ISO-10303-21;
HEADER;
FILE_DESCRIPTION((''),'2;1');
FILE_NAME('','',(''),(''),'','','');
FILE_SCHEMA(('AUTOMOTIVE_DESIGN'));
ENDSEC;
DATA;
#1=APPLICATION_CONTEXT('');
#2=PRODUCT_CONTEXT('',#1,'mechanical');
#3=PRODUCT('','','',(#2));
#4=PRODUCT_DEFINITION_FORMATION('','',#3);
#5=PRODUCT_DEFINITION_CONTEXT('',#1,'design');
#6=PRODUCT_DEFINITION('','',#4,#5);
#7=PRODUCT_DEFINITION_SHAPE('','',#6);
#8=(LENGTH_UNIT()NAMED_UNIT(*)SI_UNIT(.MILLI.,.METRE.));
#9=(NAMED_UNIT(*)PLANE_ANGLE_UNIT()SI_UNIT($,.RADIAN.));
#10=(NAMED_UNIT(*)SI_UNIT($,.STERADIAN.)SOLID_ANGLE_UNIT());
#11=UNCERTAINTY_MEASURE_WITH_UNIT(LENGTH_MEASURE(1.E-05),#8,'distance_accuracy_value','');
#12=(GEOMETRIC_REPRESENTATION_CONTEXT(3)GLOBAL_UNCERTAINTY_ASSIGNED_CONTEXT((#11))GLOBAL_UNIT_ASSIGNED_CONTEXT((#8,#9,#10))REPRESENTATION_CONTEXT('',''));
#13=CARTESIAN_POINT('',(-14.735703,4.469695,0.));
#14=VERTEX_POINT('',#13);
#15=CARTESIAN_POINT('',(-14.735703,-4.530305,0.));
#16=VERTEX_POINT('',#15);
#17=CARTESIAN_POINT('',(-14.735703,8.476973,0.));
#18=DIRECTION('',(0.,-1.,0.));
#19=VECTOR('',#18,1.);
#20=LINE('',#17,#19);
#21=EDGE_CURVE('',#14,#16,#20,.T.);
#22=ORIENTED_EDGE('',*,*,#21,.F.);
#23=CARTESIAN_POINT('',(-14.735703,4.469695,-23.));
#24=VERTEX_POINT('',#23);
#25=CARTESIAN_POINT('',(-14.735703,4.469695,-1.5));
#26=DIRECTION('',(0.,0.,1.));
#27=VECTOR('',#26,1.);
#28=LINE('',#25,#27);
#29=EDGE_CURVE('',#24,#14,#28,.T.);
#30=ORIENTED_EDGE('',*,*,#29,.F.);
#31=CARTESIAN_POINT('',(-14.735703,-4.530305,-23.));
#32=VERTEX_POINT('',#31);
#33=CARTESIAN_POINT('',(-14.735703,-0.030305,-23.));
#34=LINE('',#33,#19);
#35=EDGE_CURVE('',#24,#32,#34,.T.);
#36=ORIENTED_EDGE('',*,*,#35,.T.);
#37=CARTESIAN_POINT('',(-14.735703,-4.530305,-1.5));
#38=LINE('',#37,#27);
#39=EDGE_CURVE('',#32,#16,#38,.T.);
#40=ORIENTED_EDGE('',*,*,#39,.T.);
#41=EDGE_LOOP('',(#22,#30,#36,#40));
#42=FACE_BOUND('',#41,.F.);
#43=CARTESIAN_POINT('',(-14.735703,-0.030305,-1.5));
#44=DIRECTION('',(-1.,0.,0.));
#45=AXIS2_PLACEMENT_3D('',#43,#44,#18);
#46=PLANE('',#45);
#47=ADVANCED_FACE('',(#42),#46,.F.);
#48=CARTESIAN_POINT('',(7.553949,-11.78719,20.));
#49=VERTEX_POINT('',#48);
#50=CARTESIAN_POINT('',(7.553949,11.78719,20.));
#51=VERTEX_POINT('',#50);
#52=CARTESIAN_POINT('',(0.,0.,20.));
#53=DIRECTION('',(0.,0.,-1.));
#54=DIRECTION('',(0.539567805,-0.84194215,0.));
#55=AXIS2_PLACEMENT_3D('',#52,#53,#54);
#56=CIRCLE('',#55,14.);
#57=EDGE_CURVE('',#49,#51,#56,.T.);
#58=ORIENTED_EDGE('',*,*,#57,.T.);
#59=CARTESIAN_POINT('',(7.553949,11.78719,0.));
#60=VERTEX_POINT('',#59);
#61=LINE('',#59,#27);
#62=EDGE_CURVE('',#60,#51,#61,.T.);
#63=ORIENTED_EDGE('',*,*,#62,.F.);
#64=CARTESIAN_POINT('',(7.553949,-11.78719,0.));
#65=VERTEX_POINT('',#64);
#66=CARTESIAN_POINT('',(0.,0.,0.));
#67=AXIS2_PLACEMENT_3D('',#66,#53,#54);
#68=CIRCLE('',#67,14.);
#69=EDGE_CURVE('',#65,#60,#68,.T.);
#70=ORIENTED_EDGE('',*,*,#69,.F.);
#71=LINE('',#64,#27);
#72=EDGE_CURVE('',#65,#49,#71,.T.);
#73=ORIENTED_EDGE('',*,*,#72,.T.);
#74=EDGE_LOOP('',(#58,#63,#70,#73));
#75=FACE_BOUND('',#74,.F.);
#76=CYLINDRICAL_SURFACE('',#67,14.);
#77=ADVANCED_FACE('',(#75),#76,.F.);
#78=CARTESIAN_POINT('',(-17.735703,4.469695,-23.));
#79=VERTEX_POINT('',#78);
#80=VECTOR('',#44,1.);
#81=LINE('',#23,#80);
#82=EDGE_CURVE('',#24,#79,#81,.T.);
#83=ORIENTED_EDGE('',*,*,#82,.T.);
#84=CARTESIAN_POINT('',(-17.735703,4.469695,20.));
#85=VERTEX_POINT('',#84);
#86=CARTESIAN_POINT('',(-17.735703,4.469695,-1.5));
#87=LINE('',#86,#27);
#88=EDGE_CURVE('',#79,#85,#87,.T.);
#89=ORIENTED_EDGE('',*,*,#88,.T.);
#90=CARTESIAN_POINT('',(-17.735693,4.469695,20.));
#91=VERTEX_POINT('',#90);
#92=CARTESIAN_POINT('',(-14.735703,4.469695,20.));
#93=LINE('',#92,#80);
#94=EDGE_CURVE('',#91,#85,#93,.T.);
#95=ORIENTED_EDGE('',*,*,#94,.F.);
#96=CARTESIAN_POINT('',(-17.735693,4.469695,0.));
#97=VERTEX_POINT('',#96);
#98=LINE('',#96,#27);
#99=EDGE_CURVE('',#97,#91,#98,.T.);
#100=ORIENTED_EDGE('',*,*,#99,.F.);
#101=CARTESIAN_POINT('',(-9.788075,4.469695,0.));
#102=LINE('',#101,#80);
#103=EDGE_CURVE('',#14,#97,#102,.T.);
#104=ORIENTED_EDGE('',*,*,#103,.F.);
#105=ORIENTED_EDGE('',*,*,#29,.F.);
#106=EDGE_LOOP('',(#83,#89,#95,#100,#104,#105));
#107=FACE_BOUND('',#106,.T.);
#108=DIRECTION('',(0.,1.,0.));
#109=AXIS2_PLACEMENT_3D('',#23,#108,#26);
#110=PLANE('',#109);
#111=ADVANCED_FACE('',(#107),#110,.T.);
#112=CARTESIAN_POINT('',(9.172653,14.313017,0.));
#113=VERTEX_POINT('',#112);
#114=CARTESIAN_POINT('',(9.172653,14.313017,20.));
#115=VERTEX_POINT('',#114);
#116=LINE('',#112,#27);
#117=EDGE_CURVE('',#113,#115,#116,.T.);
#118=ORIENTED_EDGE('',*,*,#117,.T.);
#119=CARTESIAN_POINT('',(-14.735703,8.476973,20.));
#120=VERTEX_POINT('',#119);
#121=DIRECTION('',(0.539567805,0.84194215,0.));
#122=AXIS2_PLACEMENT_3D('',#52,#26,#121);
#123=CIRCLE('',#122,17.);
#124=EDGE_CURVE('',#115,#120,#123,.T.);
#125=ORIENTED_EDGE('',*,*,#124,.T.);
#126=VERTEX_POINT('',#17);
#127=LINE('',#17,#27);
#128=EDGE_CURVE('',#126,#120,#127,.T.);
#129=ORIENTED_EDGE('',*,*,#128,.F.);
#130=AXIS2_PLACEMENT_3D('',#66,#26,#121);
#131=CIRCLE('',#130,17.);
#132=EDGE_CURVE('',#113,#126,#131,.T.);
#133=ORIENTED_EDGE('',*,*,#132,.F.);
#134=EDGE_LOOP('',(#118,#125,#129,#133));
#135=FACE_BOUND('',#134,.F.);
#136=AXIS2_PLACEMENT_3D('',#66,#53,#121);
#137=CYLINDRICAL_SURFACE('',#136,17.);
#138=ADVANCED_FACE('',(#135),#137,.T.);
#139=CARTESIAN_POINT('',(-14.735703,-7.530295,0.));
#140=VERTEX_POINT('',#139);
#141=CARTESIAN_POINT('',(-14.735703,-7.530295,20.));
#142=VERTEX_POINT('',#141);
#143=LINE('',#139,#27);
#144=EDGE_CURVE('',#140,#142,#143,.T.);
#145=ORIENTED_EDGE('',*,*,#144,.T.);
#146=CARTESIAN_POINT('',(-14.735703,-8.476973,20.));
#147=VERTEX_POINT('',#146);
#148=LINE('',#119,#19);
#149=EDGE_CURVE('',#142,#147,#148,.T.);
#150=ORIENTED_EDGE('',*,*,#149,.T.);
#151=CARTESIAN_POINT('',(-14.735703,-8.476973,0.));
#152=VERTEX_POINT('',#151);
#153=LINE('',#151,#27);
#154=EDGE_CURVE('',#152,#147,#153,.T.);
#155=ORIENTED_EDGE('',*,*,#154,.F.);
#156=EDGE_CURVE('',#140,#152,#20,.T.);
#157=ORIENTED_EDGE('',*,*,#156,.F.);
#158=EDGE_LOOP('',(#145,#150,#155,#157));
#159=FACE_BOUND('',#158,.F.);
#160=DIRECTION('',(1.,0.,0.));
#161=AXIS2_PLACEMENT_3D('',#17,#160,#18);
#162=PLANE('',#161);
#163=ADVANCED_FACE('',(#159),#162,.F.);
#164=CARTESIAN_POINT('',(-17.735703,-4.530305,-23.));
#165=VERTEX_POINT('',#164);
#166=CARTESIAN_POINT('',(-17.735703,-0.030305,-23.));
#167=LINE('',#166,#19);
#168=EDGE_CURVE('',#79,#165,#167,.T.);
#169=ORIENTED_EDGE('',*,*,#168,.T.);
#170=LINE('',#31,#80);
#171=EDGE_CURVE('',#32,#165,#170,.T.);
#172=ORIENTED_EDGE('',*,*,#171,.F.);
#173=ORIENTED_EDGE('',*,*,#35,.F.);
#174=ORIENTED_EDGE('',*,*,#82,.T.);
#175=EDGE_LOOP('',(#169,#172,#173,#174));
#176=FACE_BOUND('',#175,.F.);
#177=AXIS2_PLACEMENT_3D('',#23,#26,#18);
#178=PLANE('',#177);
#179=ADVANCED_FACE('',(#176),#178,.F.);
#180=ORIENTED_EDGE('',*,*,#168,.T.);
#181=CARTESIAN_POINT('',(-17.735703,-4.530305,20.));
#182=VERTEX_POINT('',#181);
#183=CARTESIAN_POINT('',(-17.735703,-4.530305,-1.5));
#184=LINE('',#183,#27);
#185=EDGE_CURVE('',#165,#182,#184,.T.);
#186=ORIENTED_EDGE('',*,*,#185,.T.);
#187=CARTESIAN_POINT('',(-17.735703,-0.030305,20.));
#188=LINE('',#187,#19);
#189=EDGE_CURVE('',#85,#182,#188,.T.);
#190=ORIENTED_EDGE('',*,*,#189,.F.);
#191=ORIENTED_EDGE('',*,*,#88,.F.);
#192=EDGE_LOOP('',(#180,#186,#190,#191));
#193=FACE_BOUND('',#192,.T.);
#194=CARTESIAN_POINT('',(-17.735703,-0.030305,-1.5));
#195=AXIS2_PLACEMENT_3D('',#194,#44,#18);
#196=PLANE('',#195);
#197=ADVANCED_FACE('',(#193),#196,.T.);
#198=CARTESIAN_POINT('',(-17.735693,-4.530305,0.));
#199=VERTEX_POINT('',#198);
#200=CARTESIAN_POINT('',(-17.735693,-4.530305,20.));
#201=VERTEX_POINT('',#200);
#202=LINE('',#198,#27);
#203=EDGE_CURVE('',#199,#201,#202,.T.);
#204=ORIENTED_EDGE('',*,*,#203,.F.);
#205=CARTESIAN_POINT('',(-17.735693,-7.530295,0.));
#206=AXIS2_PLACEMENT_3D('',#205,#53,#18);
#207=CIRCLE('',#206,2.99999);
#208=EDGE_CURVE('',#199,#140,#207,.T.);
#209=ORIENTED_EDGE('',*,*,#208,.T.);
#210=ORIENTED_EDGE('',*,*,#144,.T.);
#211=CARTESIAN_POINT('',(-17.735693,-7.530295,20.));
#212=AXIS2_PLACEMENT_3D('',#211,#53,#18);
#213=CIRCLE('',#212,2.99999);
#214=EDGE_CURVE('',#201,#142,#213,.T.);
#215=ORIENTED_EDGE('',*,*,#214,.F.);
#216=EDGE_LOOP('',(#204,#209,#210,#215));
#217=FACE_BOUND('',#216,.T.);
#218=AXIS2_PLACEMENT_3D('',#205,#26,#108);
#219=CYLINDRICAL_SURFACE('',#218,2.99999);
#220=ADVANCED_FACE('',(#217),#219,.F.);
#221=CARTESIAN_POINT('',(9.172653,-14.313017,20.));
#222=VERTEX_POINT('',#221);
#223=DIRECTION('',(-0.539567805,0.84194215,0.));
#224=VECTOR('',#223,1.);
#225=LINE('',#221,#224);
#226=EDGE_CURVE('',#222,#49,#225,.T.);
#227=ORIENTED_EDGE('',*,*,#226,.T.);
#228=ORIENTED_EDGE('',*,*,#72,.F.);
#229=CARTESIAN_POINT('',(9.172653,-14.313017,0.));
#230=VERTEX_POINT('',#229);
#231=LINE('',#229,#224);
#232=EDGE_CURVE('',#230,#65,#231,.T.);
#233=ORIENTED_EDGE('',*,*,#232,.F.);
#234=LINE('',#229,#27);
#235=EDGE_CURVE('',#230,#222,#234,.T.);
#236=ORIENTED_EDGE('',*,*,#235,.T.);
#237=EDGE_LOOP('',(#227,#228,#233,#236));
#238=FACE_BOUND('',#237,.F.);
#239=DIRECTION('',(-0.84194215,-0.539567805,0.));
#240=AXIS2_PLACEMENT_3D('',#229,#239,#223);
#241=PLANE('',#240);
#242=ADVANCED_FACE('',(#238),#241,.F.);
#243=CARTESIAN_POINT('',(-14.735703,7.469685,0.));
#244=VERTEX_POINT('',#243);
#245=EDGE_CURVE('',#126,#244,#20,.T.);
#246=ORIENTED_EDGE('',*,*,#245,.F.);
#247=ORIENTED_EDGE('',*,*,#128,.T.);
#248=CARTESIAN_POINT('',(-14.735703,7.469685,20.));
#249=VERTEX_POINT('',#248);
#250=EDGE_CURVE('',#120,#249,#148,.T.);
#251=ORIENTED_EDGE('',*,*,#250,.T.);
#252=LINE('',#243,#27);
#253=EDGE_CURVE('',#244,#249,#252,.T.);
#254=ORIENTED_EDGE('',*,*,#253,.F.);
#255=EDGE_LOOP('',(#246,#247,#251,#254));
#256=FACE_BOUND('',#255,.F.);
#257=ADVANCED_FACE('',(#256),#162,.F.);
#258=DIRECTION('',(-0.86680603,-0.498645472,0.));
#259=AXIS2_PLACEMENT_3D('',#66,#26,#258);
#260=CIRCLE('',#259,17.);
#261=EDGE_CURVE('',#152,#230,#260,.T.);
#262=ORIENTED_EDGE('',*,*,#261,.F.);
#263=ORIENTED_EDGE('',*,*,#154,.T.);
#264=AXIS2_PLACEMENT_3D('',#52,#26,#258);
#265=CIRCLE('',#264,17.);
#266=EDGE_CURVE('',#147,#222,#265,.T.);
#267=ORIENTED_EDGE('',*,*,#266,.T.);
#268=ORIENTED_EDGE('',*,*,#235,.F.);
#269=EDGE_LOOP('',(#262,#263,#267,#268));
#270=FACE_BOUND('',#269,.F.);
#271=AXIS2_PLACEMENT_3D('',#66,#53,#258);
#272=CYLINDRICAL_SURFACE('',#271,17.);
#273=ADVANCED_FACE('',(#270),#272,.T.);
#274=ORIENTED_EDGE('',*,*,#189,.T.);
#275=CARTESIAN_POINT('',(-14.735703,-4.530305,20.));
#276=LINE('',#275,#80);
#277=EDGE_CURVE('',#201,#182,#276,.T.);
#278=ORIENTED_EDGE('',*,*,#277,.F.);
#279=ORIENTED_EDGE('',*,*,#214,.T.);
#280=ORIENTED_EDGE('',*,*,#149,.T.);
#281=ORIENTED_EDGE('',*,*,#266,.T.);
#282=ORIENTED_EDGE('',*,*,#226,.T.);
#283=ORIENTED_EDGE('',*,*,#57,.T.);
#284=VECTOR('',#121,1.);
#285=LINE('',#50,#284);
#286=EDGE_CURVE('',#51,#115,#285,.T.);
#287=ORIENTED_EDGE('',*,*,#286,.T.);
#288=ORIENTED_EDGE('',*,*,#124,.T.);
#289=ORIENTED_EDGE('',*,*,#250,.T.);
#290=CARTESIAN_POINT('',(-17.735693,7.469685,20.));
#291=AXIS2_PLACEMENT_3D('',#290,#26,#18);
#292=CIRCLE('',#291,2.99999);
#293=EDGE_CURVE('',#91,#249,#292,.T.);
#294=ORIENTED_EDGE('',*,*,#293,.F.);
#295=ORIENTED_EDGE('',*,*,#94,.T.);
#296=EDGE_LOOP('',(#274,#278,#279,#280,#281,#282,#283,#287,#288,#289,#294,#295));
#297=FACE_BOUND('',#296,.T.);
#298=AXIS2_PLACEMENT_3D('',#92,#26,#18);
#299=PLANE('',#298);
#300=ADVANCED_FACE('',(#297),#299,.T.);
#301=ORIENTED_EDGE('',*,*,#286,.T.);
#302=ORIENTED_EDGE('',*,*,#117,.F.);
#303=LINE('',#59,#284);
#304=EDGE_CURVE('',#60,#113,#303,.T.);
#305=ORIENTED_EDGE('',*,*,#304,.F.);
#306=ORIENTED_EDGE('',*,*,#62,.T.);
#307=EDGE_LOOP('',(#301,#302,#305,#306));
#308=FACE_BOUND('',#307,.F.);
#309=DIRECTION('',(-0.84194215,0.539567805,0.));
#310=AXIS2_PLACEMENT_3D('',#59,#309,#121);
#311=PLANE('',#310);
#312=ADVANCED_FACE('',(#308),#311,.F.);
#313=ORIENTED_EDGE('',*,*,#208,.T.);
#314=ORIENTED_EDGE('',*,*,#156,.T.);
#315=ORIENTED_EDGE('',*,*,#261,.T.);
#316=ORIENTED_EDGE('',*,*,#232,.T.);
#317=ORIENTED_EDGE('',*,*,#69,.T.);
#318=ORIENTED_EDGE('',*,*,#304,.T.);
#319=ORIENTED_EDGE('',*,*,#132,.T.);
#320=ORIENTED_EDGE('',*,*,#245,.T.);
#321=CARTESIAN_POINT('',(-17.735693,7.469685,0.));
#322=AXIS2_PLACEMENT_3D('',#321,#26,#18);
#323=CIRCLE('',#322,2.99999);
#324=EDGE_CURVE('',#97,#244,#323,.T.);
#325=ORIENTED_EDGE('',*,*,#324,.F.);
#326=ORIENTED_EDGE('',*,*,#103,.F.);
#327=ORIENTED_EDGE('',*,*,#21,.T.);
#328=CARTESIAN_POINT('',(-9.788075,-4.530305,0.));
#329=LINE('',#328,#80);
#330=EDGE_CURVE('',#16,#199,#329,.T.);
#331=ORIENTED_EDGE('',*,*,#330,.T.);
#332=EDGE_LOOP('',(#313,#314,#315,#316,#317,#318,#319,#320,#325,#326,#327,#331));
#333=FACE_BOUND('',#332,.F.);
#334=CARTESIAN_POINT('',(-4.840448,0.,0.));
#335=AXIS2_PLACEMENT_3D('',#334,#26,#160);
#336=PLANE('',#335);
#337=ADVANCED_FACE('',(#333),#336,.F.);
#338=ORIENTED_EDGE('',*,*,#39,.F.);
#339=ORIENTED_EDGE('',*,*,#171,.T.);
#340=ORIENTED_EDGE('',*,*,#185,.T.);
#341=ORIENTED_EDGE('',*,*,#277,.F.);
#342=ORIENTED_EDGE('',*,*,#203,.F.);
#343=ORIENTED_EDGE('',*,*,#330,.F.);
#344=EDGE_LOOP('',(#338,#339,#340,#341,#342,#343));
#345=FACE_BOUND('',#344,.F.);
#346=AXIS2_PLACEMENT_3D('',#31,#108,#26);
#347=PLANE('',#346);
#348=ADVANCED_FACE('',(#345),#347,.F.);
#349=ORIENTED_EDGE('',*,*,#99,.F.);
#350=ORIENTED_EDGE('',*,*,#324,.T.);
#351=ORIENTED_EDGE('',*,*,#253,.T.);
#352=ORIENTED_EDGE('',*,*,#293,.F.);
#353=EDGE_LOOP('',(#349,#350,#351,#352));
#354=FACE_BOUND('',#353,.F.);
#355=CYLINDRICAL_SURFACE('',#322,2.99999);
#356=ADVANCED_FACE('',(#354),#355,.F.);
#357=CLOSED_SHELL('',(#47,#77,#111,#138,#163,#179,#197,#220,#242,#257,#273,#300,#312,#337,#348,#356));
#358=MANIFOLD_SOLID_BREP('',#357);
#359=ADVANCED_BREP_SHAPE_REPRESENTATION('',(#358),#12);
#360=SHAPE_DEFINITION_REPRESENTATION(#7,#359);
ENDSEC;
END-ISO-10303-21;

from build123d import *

# Parameters (mm, degrees)
F1_DEPTH = 20
F2_W     = 9
F2_H     = 43
F3_DEPTH = 3
F4_DEPTH = 3
F5_R     = 2.99999


# Not quite as in the source:
# - a fillet or chamfer is up to 0.001 mm smaller than in the source, because OpenCascade refuses the exact size
# - a feature names something its author has since deleted; it is built from what else it names


with BuildPart() as f1:
    # F0 (on Top) → F1 (new body)
    with BuildSketch(Plane.XY):
        with BuildLine():
            Line((7.553949271, 11.7871900982), (9.1726526862, 14.3130165478))
            ThreePointArc((9.1726526862, 14.3130165478), (-4.0313436719, 16.5150921341), (-14.7357025028, 8.4769730299))
            Line((-14.7357025028, 8.4769730299), (-14.7357025028, -8.4769730299))
            ThreePointArc((-14.7357025028, -8.4769730299), (-4.0313436719, -16.5150921341), (9.1726526862, -14.3130165478))
            Line((9.1726526862, -14.3130165478), (7.553949271, -11.7871900982))
            ThreePointArc((7.553949271, -11.7871900982), (-14, 0), (7.553949271, 11.7871900982))
        make_face()
    extrude(amount=F1_DEPTH)

    # F2 (on face) → F3 (join)
    with BuildSketch(Plane(origin=(-14.7357025028, 0, 0), x_dir=(0, -1, 0), z_dir=(-1, 0, 0))):
        with Locations((0.0303052693, -1.5)):
            Rectangle(F2_W, F2_H)
    extrude(amount=F3_DEPTH)

    # F2 (on face) → F4 (join)
    with BuildSketch(Plane(origin=(-14.7357025028, 0, 0), x_dir=(0, -1, 0), z_dir=(-1, 0, 0))):
        with Locations((0.0303052693, -1.5)):
            Rectangle(F2_W, F2_H)
    extrude(amount=F4_DEPTH)

    # F5 (radius 3 in the source; OpenCascade refuses exactly that, so slightly less here)
    f5_edges = [f1.edges().sort_by_distance(p)[0] for p in [
        (-14.735703, 4.469695, 10),
        (-14.735703, -4.530305, 10),
    ]]
    fillet(f5_edges, radius=F5_R)


solid = f1.part
